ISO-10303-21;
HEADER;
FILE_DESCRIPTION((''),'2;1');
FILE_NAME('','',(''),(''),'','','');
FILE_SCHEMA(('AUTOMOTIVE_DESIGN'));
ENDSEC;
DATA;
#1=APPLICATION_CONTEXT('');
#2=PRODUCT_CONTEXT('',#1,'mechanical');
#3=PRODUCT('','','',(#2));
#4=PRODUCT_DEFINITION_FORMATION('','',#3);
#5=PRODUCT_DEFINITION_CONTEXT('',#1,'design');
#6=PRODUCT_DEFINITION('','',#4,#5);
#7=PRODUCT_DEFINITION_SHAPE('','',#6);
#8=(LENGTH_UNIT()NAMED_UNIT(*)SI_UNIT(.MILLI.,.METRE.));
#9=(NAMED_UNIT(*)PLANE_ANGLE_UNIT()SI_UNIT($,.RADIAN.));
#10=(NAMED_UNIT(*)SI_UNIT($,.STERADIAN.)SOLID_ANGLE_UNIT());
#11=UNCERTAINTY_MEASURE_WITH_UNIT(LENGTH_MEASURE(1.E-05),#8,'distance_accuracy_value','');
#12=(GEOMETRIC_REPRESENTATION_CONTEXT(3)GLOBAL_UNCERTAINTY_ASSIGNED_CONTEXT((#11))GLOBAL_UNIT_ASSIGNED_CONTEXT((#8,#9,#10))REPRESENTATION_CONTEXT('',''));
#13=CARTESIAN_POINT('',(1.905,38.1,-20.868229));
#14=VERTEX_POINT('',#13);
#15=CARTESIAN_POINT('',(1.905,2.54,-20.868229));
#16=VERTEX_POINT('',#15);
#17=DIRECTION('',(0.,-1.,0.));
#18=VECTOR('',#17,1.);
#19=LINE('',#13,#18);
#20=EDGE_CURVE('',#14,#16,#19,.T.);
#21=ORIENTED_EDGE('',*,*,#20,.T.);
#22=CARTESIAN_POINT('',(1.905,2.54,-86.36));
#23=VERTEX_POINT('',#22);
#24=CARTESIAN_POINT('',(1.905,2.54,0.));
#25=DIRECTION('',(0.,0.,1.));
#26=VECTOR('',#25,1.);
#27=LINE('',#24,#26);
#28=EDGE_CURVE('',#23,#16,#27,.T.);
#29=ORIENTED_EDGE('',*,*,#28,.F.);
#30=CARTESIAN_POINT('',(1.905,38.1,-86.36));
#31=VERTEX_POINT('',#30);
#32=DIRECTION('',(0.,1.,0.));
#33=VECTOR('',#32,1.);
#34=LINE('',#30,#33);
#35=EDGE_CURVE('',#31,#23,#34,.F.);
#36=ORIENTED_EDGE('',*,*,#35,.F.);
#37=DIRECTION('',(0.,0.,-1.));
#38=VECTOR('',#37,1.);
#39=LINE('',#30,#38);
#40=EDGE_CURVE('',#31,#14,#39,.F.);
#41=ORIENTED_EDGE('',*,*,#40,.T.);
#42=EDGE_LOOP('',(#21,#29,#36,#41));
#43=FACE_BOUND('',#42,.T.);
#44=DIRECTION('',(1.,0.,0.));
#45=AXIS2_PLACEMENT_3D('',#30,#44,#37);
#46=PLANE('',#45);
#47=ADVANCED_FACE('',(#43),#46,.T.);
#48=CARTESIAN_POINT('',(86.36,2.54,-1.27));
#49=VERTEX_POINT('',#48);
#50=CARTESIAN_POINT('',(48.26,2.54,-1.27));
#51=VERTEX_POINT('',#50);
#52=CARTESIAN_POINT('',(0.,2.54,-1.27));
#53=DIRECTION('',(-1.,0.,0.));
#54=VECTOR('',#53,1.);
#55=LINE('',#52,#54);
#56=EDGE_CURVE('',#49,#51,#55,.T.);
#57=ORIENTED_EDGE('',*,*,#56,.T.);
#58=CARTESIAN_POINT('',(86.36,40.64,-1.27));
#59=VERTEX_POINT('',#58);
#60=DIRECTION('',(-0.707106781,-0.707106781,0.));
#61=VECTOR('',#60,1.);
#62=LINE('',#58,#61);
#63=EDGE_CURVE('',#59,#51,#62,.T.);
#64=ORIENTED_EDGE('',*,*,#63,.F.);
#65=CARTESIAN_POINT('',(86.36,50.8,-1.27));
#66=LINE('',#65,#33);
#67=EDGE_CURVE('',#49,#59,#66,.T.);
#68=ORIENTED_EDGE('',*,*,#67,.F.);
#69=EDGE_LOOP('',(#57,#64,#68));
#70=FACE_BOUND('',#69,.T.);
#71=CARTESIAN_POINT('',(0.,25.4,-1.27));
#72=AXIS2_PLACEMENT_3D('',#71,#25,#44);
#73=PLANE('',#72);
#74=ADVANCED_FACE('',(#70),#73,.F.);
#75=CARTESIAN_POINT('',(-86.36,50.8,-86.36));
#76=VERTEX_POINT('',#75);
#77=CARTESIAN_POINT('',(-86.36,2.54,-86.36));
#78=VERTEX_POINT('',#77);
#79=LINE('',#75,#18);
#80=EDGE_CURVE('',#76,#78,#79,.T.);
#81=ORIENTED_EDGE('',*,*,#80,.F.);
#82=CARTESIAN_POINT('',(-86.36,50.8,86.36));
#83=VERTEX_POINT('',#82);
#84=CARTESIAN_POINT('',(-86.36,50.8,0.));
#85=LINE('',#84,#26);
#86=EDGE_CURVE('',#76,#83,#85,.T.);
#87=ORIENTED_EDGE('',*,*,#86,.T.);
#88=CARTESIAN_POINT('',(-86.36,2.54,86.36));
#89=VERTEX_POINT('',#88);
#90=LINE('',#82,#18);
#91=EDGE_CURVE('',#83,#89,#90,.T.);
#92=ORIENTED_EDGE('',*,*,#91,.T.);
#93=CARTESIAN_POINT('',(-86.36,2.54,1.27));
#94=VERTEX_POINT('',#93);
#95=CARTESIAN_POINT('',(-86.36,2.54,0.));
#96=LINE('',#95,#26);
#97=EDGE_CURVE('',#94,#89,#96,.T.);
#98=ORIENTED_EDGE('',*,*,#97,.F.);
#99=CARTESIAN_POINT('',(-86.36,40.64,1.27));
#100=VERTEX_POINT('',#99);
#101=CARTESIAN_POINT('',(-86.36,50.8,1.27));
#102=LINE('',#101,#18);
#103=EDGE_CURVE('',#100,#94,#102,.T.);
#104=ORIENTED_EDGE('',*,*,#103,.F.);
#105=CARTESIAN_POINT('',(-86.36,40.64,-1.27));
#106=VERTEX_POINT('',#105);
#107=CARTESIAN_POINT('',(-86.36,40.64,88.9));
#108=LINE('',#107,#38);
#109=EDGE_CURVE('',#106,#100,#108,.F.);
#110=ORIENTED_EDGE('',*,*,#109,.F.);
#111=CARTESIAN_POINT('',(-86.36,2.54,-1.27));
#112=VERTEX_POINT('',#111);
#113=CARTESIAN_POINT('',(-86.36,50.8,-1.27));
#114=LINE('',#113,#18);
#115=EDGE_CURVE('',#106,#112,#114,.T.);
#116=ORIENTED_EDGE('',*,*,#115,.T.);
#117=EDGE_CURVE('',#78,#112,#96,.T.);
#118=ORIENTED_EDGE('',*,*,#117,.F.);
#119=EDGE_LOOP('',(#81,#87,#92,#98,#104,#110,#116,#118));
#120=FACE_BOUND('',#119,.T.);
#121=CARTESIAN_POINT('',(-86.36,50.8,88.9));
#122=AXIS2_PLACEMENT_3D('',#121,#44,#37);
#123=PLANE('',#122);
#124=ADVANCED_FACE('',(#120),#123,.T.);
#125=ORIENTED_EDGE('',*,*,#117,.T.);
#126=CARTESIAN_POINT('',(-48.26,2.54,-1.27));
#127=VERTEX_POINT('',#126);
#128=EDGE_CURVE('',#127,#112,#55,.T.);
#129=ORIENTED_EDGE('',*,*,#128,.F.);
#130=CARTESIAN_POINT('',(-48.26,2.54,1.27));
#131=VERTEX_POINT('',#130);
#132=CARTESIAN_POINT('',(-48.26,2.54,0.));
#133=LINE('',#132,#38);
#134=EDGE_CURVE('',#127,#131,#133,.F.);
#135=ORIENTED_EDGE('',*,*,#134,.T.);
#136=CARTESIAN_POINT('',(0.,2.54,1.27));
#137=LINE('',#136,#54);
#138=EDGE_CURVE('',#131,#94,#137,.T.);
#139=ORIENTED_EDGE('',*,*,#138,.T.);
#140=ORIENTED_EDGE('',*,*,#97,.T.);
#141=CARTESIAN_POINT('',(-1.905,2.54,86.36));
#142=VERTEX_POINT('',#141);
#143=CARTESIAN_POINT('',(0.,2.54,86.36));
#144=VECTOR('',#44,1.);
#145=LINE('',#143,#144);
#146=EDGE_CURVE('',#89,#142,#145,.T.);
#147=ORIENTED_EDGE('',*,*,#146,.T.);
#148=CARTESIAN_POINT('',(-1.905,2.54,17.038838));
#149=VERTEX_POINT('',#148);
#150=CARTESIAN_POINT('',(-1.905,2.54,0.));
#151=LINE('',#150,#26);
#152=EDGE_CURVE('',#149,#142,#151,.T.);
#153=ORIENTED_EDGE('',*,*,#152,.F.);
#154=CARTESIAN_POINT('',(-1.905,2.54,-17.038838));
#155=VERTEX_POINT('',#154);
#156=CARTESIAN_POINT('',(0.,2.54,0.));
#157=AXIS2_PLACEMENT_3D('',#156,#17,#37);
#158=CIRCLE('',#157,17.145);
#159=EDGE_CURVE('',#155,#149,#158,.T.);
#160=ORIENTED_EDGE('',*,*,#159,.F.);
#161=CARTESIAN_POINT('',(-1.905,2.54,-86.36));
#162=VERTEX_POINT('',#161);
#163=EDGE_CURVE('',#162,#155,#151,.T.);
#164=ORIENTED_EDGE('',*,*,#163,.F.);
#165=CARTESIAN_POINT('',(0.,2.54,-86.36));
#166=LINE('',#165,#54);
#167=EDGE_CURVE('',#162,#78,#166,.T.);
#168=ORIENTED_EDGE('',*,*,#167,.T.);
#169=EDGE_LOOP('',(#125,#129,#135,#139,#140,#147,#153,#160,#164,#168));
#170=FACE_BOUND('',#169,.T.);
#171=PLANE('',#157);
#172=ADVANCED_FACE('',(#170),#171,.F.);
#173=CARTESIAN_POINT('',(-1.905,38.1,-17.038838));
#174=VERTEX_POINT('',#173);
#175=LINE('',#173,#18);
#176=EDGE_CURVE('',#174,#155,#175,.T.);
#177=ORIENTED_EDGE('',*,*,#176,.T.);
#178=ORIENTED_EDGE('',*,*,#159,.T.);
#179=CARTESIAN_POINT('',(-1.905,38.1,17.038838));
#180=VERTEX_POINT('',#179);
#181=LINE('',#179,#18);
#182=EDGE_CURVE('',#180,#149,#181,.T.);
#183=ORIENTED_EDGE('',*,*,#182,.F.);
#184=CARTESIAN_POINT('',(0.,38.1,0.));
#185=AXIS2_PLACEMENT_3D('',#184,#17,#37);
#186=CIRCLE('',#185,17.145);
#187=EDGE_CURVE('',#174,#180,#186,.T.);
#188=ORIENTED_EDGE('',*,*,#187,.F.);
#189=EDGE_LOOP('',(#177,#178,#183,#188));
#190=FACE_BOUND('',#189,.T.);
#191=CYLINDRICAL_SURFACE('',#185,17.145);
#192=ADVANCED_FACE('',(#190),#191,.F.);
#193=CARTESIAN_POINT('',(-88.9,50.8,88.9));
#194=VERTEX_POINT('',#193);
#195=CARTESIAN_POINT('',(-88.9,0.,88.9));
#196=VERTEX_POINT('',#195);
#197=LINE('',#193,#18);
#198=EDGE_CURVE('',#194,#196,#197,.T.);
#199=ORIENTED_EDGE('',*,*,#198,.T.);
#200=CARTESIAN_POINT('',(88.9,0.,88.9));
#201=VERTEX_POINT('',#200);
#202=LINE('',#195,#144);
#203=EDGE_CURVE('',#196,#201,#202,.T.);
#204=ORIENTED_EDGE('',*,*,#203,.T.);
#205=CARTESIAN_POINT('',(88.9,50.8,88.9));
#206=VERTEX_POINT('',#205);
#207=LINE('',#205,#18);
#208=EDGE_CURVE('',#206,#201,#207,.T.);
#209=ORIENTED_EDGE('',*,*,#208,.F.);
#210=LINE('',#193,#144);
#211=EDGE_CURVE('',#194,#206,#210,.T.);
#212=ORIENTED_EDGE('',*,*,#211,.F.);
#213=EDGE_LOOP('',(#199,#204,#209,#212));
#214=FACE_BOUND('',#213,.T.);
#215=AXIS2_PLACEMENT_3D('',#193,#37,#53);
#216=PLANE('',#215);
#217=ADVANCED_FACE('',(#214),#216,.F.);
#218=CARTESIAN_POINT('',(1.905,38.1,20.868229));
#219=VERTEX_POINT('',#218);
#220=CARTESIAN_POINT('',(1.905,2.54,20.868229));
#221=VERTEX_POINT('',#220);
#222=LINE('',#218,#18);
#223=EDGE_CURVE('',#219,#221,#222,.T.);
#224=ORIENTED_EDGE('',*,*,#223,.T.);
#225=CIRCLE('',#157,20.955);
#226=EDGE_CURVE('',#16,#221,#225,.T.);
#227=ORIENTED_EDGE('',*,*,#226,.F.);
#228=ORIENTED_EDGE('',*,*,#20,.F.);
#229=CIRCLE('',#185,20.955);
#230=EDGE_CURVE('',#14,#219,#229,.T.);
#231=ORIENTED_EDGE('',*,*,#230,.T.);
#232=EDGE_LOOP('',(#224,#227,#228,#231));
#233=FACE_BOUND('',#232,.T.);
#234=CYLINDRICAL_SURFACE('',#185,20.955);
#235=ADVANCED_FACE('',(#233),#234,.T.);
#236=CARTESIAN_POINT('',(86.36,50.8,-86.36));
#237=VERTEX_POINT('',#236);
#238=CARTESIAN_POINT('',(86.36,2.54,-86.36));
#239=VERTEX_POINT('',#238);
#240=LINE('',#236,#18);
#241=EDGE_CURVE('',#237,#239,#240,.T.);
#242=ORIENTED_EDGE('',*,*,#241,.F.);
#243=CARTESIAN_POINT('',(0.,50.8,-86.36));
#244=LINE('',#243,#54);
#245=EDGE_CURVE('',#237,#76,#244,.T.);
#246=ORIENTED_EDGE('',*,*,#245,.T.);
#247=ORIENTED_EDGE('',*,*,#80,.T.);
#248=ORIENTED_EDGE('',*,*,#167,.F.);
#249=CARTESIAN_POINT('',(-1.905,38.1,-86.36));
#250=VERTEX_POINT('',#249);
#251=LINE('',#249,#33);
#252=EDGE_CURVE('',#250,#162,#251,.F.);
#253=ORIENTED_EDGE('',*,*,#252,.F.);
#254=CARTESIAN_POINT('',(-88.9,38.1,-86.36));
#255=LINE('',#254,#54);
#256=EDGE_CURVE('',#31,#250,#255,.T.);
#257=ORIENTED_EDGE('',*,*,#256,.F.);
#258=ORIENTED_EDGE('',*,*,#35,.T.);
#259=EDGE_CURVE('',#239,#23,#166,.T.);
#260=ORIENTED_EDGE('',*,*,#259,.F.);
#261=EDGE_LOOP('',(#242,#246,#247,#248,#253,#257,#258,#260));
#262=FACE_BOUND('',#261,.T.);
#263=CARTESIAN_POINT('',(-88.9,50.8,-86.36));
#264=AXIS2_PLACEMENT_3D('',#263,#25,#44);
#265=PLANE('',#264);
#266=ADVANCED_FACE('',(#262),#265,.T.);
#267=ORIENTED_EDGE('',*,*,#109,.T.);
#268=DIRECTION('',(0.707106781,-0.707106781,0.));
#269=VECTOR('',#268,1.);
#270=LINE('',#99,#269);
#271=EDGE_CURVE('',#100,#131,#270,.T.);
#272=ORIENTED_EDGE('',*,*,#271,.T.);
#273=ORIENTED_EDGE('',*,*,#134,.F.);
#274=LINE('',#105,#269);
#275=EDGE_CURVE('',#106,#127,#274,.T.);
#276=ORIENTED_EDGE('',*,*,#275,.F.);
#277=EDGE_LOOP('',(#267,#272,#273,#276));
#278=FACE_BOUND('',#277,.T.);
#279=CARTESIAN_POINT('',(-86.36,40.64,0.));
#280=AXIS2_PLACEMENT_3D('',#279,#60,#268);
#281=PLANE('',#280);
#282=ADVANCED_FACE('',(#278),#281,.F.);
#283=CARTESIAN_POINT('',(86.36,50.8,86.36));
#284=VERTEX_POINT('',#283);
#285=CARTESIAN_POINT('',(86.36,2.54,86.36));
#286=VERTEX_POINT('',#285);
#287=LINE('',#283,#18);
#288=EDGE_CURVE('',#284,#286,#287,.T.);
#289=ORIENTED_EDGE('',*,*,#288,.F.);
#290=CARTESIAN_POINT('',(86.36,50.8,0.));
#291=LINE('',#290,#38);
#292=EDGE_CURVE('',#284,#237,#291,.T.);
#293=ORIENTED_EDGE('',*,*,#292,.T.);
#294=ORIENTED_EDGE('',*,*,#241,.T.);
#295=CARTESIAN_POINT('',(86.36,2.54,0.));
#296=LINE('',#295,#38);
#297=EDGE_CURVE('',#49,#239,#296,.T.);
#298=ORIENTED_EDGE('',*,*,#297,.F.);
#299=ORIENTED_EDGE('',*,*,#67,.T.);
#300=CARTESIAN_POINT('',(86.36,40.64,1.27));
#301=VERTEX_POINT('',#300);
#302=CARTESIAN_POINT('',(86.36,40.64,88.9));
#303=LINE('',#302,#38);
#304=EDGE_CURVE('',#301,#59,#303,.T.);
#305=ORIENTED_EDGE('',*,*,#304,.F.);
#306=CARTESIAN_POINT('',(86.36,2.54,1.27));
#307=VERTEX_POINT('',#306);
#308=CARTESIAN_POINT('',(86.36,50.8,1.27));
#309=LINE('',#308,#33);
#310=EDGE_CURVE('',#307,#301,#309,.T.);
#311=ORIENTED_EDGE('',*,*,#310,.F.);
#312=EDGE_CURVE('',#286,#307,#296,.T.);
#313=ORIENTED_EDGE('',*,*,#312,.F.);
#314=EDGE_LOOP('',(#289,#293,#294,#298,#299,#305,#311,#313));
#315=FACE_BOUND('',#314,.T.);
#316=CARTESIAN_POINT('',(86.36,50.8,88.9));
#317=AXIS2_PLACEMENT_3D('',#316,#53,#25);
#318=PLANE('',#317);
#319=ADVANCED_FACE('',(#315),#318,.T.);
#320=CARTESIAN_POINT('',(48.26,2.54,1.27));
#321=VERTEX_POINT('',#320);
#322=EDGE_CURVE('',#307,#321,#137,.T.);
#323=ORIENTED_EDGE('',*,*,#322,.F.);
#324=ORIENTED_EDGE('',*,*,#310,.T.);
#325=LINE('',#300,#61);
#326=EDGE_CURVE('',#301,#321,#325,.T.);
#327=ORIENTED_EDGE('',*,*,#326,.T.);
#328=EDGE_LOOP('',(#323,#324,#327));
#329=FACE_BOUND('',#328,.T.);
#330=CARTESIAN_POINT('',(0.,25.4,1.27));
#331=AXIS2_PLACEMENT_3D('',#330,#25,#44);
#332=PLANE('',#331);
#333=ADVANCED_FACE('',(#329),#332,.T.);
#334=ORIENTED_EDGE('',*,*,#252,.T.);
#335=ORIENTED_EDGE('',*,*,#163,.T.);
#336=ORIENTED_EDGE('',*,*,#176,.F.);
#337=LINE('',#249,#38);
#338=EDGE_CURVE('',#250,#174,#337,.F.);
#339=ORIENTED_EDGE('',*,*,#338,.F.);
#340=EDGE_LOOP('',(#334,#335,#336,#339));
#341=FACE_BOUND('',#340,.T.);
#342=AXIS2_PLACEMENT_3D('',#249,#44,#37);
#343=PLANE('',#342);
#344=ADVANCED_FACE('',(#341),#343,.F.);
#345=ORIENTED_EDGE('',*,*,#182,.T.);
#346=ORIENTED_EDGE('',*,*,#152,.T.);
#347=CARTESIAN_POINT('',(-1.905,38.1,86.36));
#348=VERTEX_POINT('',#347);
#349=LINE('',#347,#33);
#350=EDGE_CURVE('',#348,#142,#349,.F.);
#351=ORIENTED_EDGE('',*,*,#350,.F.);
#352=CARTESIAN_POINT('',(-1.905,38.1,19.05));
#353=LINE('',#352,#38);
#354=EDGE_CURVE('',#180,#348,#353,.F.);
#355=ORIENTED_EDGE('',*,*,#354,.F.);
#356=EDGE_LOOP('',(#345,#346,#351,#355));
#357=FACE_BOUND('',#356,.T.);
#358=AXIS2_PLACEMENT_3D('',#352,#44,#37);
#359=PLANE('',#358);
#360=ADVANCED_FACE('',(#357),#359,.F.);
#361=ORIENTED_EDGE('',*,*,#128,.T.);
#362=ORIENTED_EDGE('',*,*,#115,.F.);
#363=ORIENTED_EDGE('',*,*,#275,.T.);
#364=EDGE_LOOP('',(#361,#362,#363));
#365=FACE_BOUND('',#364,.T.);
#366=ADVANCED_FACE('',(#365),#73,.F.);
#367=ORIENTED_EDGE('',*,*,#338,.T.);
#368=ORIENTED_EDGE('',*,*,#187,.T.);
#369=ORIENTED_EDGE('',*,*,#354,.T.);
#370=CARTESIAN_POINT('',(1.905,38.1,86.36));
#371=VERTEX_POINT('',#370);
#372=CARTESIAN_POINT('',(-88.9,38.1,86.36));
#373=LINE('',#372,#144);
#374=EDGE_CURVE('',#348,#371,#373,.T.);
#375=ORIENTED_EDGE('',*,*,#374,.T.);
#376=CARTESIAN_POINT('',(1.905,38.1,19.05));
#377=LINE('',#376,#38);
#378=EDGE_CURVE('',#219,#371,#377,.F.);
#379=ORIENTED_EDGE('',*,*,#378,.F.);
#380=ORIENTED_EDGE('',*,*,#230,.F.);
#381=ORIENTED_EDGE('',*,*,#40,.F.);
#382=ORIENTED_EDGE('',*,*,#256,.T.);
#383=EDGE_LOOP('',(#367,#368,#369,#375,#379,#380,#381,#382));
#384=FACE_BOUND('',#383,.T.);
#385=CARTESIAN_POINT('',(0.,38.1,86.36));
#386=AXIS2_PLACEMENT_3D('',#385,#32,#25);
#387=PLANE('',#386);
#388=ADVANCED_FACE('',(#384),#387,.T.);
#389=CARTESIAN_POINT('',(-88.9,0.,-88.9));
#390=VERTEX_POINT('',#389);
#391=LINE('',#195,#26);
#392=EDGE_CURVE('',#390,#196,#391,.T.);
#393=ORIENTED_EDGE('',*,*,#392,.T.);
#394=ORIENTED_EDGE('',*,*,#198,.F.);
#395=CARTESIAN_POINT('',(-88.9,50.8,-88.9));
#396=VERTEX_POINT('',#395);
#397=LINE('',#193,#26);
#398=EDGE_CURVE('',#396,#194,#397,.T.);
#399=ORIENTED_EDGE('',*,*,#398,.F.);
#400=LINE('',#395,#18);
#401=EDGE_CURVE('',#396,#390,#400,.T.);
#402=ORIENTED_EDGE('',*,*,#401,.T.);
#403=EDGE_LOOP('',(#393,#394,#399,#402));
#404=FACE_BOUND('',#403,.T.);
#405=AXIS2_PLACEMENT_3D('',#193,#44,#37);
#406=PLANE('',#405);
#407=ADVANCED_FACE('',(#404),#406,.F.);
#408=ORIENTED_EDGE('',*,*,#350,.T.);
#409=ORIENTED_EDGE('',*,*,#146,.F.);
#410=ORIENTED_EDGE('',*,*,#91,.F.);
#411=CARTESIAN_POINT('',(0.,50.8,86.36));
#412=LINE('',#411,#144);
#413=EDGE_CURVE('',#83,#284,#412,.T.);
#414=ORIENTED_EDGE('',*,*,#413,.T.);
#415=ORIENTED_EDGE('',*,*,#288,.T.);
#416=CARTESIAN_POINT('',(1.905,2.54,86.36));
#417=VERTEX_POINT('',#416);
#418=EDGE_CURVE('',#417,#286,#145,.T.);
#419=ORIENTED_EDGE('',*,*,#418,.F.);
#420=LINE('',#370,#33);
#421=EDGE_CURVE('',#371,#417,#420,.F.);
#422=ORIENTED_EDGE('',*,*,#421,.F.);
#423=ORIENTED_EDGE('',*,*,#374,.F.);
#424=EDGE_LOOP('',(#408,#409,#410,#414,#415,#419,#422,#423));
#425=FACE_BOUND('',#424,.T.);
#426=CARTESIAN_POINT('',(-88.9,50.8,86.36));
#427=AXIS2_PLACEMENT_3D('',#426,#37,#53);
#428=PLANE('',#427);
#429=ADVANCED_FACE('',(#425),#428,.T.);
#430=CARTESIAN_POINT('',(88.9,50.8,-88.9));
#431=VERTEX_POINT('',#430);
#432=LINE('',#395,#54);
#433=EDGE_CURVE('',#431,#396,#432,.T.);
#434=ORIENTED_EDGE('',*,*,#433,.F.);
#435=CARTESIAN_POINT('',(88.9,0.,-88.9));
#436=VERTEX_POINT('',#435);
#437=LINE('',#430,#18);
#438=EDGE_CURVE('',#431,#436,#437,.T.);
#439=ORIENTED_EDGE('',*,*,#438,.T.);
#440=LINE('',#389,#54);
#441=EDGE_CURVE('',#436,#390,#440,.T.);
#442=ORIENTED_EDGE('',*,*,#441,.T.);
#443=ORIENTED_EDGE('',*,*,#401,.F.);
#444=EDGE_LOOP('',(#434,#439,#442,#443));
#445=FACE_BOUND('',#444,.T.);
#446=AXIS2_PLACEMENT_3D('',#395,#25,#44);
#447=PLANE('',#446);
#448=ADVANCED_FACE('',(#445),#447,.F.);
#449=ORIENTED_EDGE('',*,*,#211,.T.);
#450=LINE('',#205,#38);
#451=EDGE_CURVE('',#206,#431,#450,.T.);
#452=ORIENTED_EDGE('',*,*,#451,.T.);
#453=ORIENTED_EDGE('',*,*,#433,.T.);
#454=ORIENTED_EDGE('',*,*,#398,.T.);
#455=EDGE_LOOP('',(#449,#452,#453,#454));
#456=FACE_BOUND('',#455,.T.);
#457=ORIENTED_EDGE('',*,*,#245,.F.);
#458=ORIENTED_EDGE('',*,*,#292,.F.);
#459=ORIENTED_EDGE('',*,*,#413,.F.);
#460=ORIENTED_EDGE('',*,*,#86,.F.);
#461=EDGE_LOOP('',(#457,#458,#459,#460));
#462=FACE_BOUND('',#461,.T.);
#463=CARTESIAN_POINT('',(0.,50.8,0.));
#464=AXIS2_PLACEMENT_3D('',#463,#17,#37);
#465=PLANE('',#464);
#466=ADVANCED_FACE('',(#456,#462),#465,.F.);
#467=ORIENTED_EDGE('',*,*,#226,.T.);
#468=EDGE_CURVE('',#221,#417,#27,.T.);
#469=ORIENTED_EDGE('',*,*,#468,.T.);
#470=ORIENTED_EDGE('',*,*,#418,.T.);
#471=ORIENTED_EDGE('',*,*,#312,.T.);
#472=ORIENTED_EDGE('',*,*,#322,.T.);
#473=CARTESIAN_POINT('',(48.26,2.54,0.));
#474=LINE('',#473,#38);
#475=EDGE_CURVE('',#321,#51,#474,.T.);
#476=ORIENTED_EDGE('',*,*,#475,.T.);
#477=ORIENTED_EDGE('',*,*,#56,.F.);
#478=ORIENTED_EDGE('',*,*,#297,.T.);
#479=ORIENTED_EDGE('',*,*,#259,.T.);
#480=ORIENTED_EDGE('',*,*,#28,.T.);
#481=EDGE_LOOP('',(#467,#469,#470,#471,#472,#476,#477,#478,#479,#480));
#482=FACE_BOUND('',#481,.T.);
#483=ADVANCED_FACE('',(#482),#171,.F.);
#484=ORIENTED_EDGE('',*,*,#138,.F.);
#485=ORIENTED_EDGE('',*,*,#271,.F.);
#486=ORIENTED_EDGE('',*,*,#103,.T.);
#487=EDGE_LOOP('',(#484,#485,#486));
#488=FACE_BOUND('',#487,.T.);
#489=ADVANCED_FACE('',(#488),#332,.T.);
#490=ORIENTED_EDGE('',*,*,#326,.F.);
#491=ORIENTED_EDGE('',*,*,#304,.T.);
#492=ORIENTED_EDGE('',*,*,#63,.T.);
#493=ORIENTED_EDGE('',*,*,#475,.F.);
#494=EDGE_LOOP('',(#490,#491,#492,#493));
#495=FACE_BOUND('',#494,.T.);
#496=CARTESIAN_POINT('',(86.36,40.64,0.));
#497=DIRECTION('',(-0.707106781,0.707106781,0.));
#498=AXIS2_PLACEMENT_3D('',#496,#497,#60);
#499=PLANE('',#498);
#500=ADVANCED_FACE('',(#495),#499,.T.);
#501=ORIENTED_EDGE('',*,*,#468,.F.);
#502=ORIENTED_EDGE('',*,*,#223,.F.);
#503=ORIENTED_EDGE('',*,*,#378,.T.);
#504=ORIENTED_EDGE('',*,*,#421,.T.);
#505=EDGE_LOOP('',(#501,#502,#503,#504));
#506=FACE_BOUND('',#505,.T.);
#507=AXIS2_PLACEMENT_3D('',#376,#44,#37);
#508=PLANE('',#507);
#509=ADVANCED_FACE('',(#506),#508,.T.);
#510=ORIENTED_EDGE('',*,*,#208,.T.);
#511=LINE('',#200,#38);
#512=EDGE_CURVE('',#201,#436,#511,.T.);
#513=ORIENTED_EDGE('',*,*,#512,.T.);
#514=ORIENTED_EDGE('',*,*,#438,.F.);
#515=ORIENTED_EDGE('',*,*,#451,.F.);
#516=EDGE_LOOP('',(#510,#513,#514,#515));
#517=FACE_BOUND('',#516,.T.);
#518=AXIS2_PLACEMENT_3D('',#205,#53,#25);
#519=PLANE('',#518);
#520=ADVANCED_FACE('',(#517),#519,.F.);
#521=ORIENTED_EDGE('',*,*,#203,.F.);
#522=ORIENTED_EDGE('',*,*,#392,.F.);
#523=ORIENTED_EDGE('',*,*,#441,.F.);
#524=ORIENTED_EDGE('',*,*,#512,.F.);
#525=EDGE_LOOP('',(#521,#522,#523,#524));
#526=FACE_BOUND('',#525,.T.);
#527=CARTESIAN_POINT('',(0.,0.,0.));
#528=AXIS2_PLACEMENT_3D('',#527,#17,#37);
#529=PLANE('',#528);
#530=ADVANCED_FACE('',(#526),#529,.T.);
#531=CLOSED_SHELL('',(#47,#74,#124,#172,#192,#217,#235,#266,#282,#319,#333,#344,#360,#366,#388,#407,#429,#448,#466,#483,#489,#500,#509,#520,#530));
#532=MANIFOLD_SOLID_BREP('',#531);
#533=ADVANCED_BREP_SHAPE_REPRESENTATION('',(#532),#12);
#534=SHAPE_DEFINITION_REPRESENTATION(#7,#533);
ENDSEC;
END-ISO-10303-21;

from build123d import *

# Parameters (mm, degrees)
SKETCH1_W           = 177.8
SKETCH1_H           = 177.8
BOSS_EXTRUDE1_DEPTH = 50.8
SHELL1_T            = -2.54
RIB3_START          = -1.27
RIB3_DEPTH          = 2.54
RIB7_REACH          = 133.37


# Read off the part's stored shape, not the designer's step: Rib3
with BuildPart() as part:
    # Sketch1 → Boss-Extrude1 (new body)
    with BuildSketch(Plane(origin=(0, 0, 0), x_dir=(1, 0, 0), z_dir=(0, 1, 0))):
        Rectangle(SKETCH1_W, SKETCH1_H)
    extrude(amount=BOSS_EXTRUDE1_DEPTH)

    # Shell1
    shell1_openings = [part.faces().sort_by_distance(p)[0] for p in [
        (0, 50.8, 0),
    ]]
    offset(amount=SHELL1_T, openings=shell1_openings, kind=Kind.INTERSECTION)

    # Rib3 outline → Rib3 (add)
    with BuildSketch(Plane.XY.offset(RIB3_START)):
        Polygon((-48.26, 2.54), (-86.36, 40.64), (-86.36, 2.54), align=None)
    rib3 = extrude(amount=RIB3_DEPTH)

    # Mirror1: Rib3 across plane
    add(rib3.mirror(Plane(origin=(0, 0, 0), x_dir=(0, 0, 1), z_dir=(1, 0, 0))))

    # Sketch5 walls → Rib7 (add, up to next)
    with BuildSketch(Plane(origin=(0, 38.1, 0), x_dir=(-1, 0, 0), z_dir=(0, -1, 0)), mode=Mode.PRIVATE) as rib7_sk1:
        with BuildLine():
            Line((-1.905, 218.729821496), (-1.905, 20.868229441))
            ThreePointArc((-1.905, 20.868229441), (-20.955, 0), (-1.905, -20.868229441))
            Line((-1.905, -20.868229441), (-1.905, -218.729821496))
            Line((-1.905, -218.729821496), (1.905, -218.729821496))
            Line((1.905, -218.729821496), (1.905, -17.038837989))
            ThreePointArc((1.905, -17.038837989), (-17.145, 0), (1.905, 17.038837989))
            Line((1.905, 17.038837989), (1.905, 218.729821496))
            Line((1.905, 218.729821496), (-1.905, 218.729821496))
        make_face()
    rib7_tool1 = extrude(rib7_sk1.sketch, amount=RIB7_REACH, mode=Mode.PRIVATE) - part.part
    add(rib7_tool1.solids().sort_by_distance((19.05, 38.1, 0))[0])


solid = part.part
